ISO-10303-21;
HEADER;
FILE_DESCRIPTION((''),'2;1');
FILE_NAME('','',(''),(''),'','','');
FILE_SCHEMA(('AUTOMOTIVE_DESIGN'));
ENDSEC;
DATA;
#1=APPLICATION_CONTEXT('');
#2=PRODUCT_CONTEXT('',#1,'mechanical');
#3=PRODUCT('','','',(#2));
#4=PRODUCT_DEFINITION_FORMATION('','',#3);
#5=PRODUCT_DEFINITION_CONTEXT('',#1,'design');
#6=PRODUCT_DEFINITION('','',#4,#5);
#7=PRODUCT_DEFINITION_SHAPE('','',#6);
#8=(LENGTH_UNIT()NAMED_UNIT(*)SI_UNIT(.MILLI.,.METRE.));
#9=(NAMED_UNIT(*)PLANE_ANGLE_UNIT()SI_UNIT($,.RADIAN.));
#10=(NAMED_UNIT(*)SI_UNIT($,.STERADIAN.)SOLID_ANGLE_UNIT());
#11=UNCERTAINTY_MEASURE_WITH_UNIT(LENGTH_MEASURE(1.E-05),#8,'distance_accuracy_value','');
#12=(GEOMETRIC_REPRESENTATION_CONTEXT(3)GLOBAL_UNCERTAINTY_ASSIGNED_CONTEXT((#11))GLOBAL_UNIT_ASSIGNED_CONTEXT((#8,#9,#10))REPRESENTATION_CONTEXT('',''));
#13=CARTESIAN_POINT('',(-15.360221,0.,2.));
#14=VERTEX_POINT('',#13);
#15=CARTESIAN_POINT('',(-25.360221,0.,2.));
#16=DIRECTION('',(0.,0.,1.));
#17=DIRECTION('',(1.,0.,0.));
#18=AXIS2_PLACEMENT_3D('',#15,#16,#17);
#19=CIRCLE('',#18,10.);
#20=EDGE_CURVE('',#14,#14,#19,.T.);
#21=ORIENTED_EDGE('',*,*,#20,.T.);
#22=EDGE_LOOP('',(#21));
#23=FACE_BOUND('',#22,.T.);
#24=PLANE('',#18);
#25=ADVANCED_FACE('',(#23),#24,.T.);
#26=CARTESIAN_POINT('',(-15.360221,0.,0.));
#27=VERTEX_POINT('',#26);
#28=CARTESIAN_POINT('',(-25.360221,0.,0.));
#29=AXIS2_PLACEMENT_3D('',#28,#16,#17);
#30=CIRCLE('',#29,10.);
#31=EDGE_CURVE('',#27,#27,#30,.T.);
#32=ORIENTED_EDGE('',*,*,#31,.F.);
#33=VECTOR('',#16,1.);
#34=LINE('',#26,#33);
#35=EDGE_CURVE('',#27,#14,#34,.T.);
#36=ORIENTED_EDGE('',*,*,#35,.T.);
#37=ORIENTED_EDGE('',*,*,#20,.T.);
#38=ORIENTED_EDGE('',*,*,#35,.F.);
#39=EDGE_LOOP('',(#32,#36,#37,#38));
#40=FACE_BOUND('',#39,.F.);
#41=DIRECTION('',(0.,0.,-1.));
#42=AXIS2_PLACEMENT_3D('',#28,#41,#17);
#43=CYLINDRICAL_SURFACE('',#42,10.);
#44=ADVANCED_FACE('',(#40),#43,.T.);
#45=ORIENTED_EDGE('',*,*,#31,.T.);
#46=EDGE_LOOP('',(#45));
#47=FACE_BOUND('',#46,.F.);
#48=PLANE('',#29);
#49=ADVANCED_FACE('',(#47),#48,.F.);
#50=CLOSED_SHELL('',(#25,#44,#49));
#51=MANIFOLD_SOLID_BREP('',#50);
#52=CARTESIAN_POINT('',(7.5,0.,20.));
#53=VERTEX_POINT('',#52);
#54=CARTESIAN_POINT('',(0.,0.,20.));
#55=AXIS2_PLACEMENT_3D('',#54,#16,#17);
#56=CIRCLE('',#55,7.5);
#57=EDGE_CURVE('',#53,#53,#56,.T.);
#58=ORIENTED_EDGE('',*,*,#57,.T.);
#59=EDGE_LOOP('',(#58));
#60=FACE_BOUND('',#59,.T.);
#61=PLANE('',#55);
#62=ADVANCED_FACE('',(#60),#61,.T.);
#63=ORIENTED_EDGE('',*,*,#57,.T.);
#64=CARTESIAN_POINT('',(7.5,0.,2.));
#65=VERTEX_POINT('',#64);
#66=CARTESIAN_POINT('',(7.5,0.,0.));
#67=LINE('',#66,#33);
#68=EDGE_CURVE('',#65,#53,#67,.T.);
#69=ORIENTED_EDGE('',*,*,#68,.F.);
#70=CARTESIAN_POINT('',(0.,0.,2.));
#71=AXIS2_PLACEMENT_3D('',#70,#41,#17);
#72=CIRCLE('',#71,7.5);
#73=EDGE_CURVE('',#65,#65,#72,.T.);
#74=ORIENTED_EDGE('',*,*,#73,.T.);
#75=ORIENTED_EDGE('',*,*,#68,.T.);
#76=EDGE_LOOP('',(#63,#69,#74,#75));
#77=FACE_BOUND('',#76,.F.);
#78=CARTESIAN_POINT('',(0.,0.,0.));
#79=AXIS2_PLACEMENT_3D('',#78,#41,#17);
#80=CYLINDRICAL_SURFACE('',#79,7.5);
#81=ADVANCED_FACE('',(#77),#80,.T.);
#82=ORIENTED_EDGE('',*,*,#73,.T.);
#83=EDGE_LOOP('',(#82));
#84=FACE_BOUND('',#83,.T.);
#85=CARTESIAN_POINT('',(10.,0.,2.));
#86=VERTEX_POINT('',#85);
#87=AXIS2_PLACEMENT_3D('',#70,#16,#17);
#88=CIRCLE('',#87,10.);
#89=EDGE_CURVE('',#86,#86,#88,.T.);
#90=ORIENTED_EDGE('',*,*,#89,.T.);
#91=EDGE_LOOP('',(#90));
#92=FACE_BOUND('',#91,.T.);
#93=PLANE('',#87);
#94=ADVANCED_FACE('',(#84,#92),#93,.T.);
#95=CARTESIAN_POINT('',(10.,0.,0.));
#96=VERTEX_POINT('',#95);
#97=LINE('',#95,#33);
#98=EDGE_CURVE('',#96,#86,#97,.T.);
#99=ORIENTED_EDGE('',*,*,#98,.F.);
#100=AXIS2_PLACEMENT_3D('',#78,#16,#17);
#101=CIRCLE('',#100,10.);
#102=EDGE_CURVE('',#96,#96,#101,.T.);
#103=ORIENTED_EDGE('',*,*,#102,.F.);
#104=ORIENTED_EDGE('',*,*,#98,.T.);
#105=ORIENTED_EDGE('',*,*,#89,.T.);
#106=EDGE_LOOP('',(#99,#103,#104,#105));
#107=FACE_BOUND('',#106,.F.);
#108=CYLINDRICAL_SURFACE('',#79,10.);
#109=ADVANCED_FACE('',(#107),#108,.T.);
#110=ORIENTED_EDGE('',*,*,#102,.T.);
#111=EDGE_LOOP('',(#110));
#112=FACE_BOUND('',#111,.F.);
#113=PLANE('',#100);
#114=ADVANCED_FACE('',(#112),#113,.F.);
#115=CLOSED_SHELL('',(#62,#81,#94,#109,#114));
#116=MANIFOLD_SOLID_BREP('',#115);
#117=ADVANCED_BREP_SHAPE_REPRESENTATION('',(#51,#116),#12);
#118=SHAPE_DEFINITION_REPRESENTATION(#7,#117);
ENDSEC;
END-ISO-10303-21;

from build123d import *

# Parameters (mm, degrees)
F0_R     = 10
F1_DEPTH = 2
F2_R     = 7.5
F3_DEPTH = 20


# Not quite as in the source:
# - the program builds the solid bodies; features that only make, move or delete a surface that nothing else refers to are left out


with BuildPart() as f1:
    # F0 (on Top) → F1 (new body)
    with BuildSketch(Plane.XY):
        Circle(F0_R)
    extrude(amount=F1_DEPTH)

    # F2 (on Top) → F3 (join)
    with BuildSketch(Plane.XY):
        Circle(F2_R)
    extrude(amount=F3_DEPTH)


with BuildPart() as f1b:
    # F0 (on Top) → F1, piece 2 (new body)
    with BuildSketch(Plane.XY):
        with Locations((-25.3602210878, 0)):
            Circle(F0_R)
    extrude(amount=F1_DEPTH)


solid = Compound([f1.part, f1b.part])
